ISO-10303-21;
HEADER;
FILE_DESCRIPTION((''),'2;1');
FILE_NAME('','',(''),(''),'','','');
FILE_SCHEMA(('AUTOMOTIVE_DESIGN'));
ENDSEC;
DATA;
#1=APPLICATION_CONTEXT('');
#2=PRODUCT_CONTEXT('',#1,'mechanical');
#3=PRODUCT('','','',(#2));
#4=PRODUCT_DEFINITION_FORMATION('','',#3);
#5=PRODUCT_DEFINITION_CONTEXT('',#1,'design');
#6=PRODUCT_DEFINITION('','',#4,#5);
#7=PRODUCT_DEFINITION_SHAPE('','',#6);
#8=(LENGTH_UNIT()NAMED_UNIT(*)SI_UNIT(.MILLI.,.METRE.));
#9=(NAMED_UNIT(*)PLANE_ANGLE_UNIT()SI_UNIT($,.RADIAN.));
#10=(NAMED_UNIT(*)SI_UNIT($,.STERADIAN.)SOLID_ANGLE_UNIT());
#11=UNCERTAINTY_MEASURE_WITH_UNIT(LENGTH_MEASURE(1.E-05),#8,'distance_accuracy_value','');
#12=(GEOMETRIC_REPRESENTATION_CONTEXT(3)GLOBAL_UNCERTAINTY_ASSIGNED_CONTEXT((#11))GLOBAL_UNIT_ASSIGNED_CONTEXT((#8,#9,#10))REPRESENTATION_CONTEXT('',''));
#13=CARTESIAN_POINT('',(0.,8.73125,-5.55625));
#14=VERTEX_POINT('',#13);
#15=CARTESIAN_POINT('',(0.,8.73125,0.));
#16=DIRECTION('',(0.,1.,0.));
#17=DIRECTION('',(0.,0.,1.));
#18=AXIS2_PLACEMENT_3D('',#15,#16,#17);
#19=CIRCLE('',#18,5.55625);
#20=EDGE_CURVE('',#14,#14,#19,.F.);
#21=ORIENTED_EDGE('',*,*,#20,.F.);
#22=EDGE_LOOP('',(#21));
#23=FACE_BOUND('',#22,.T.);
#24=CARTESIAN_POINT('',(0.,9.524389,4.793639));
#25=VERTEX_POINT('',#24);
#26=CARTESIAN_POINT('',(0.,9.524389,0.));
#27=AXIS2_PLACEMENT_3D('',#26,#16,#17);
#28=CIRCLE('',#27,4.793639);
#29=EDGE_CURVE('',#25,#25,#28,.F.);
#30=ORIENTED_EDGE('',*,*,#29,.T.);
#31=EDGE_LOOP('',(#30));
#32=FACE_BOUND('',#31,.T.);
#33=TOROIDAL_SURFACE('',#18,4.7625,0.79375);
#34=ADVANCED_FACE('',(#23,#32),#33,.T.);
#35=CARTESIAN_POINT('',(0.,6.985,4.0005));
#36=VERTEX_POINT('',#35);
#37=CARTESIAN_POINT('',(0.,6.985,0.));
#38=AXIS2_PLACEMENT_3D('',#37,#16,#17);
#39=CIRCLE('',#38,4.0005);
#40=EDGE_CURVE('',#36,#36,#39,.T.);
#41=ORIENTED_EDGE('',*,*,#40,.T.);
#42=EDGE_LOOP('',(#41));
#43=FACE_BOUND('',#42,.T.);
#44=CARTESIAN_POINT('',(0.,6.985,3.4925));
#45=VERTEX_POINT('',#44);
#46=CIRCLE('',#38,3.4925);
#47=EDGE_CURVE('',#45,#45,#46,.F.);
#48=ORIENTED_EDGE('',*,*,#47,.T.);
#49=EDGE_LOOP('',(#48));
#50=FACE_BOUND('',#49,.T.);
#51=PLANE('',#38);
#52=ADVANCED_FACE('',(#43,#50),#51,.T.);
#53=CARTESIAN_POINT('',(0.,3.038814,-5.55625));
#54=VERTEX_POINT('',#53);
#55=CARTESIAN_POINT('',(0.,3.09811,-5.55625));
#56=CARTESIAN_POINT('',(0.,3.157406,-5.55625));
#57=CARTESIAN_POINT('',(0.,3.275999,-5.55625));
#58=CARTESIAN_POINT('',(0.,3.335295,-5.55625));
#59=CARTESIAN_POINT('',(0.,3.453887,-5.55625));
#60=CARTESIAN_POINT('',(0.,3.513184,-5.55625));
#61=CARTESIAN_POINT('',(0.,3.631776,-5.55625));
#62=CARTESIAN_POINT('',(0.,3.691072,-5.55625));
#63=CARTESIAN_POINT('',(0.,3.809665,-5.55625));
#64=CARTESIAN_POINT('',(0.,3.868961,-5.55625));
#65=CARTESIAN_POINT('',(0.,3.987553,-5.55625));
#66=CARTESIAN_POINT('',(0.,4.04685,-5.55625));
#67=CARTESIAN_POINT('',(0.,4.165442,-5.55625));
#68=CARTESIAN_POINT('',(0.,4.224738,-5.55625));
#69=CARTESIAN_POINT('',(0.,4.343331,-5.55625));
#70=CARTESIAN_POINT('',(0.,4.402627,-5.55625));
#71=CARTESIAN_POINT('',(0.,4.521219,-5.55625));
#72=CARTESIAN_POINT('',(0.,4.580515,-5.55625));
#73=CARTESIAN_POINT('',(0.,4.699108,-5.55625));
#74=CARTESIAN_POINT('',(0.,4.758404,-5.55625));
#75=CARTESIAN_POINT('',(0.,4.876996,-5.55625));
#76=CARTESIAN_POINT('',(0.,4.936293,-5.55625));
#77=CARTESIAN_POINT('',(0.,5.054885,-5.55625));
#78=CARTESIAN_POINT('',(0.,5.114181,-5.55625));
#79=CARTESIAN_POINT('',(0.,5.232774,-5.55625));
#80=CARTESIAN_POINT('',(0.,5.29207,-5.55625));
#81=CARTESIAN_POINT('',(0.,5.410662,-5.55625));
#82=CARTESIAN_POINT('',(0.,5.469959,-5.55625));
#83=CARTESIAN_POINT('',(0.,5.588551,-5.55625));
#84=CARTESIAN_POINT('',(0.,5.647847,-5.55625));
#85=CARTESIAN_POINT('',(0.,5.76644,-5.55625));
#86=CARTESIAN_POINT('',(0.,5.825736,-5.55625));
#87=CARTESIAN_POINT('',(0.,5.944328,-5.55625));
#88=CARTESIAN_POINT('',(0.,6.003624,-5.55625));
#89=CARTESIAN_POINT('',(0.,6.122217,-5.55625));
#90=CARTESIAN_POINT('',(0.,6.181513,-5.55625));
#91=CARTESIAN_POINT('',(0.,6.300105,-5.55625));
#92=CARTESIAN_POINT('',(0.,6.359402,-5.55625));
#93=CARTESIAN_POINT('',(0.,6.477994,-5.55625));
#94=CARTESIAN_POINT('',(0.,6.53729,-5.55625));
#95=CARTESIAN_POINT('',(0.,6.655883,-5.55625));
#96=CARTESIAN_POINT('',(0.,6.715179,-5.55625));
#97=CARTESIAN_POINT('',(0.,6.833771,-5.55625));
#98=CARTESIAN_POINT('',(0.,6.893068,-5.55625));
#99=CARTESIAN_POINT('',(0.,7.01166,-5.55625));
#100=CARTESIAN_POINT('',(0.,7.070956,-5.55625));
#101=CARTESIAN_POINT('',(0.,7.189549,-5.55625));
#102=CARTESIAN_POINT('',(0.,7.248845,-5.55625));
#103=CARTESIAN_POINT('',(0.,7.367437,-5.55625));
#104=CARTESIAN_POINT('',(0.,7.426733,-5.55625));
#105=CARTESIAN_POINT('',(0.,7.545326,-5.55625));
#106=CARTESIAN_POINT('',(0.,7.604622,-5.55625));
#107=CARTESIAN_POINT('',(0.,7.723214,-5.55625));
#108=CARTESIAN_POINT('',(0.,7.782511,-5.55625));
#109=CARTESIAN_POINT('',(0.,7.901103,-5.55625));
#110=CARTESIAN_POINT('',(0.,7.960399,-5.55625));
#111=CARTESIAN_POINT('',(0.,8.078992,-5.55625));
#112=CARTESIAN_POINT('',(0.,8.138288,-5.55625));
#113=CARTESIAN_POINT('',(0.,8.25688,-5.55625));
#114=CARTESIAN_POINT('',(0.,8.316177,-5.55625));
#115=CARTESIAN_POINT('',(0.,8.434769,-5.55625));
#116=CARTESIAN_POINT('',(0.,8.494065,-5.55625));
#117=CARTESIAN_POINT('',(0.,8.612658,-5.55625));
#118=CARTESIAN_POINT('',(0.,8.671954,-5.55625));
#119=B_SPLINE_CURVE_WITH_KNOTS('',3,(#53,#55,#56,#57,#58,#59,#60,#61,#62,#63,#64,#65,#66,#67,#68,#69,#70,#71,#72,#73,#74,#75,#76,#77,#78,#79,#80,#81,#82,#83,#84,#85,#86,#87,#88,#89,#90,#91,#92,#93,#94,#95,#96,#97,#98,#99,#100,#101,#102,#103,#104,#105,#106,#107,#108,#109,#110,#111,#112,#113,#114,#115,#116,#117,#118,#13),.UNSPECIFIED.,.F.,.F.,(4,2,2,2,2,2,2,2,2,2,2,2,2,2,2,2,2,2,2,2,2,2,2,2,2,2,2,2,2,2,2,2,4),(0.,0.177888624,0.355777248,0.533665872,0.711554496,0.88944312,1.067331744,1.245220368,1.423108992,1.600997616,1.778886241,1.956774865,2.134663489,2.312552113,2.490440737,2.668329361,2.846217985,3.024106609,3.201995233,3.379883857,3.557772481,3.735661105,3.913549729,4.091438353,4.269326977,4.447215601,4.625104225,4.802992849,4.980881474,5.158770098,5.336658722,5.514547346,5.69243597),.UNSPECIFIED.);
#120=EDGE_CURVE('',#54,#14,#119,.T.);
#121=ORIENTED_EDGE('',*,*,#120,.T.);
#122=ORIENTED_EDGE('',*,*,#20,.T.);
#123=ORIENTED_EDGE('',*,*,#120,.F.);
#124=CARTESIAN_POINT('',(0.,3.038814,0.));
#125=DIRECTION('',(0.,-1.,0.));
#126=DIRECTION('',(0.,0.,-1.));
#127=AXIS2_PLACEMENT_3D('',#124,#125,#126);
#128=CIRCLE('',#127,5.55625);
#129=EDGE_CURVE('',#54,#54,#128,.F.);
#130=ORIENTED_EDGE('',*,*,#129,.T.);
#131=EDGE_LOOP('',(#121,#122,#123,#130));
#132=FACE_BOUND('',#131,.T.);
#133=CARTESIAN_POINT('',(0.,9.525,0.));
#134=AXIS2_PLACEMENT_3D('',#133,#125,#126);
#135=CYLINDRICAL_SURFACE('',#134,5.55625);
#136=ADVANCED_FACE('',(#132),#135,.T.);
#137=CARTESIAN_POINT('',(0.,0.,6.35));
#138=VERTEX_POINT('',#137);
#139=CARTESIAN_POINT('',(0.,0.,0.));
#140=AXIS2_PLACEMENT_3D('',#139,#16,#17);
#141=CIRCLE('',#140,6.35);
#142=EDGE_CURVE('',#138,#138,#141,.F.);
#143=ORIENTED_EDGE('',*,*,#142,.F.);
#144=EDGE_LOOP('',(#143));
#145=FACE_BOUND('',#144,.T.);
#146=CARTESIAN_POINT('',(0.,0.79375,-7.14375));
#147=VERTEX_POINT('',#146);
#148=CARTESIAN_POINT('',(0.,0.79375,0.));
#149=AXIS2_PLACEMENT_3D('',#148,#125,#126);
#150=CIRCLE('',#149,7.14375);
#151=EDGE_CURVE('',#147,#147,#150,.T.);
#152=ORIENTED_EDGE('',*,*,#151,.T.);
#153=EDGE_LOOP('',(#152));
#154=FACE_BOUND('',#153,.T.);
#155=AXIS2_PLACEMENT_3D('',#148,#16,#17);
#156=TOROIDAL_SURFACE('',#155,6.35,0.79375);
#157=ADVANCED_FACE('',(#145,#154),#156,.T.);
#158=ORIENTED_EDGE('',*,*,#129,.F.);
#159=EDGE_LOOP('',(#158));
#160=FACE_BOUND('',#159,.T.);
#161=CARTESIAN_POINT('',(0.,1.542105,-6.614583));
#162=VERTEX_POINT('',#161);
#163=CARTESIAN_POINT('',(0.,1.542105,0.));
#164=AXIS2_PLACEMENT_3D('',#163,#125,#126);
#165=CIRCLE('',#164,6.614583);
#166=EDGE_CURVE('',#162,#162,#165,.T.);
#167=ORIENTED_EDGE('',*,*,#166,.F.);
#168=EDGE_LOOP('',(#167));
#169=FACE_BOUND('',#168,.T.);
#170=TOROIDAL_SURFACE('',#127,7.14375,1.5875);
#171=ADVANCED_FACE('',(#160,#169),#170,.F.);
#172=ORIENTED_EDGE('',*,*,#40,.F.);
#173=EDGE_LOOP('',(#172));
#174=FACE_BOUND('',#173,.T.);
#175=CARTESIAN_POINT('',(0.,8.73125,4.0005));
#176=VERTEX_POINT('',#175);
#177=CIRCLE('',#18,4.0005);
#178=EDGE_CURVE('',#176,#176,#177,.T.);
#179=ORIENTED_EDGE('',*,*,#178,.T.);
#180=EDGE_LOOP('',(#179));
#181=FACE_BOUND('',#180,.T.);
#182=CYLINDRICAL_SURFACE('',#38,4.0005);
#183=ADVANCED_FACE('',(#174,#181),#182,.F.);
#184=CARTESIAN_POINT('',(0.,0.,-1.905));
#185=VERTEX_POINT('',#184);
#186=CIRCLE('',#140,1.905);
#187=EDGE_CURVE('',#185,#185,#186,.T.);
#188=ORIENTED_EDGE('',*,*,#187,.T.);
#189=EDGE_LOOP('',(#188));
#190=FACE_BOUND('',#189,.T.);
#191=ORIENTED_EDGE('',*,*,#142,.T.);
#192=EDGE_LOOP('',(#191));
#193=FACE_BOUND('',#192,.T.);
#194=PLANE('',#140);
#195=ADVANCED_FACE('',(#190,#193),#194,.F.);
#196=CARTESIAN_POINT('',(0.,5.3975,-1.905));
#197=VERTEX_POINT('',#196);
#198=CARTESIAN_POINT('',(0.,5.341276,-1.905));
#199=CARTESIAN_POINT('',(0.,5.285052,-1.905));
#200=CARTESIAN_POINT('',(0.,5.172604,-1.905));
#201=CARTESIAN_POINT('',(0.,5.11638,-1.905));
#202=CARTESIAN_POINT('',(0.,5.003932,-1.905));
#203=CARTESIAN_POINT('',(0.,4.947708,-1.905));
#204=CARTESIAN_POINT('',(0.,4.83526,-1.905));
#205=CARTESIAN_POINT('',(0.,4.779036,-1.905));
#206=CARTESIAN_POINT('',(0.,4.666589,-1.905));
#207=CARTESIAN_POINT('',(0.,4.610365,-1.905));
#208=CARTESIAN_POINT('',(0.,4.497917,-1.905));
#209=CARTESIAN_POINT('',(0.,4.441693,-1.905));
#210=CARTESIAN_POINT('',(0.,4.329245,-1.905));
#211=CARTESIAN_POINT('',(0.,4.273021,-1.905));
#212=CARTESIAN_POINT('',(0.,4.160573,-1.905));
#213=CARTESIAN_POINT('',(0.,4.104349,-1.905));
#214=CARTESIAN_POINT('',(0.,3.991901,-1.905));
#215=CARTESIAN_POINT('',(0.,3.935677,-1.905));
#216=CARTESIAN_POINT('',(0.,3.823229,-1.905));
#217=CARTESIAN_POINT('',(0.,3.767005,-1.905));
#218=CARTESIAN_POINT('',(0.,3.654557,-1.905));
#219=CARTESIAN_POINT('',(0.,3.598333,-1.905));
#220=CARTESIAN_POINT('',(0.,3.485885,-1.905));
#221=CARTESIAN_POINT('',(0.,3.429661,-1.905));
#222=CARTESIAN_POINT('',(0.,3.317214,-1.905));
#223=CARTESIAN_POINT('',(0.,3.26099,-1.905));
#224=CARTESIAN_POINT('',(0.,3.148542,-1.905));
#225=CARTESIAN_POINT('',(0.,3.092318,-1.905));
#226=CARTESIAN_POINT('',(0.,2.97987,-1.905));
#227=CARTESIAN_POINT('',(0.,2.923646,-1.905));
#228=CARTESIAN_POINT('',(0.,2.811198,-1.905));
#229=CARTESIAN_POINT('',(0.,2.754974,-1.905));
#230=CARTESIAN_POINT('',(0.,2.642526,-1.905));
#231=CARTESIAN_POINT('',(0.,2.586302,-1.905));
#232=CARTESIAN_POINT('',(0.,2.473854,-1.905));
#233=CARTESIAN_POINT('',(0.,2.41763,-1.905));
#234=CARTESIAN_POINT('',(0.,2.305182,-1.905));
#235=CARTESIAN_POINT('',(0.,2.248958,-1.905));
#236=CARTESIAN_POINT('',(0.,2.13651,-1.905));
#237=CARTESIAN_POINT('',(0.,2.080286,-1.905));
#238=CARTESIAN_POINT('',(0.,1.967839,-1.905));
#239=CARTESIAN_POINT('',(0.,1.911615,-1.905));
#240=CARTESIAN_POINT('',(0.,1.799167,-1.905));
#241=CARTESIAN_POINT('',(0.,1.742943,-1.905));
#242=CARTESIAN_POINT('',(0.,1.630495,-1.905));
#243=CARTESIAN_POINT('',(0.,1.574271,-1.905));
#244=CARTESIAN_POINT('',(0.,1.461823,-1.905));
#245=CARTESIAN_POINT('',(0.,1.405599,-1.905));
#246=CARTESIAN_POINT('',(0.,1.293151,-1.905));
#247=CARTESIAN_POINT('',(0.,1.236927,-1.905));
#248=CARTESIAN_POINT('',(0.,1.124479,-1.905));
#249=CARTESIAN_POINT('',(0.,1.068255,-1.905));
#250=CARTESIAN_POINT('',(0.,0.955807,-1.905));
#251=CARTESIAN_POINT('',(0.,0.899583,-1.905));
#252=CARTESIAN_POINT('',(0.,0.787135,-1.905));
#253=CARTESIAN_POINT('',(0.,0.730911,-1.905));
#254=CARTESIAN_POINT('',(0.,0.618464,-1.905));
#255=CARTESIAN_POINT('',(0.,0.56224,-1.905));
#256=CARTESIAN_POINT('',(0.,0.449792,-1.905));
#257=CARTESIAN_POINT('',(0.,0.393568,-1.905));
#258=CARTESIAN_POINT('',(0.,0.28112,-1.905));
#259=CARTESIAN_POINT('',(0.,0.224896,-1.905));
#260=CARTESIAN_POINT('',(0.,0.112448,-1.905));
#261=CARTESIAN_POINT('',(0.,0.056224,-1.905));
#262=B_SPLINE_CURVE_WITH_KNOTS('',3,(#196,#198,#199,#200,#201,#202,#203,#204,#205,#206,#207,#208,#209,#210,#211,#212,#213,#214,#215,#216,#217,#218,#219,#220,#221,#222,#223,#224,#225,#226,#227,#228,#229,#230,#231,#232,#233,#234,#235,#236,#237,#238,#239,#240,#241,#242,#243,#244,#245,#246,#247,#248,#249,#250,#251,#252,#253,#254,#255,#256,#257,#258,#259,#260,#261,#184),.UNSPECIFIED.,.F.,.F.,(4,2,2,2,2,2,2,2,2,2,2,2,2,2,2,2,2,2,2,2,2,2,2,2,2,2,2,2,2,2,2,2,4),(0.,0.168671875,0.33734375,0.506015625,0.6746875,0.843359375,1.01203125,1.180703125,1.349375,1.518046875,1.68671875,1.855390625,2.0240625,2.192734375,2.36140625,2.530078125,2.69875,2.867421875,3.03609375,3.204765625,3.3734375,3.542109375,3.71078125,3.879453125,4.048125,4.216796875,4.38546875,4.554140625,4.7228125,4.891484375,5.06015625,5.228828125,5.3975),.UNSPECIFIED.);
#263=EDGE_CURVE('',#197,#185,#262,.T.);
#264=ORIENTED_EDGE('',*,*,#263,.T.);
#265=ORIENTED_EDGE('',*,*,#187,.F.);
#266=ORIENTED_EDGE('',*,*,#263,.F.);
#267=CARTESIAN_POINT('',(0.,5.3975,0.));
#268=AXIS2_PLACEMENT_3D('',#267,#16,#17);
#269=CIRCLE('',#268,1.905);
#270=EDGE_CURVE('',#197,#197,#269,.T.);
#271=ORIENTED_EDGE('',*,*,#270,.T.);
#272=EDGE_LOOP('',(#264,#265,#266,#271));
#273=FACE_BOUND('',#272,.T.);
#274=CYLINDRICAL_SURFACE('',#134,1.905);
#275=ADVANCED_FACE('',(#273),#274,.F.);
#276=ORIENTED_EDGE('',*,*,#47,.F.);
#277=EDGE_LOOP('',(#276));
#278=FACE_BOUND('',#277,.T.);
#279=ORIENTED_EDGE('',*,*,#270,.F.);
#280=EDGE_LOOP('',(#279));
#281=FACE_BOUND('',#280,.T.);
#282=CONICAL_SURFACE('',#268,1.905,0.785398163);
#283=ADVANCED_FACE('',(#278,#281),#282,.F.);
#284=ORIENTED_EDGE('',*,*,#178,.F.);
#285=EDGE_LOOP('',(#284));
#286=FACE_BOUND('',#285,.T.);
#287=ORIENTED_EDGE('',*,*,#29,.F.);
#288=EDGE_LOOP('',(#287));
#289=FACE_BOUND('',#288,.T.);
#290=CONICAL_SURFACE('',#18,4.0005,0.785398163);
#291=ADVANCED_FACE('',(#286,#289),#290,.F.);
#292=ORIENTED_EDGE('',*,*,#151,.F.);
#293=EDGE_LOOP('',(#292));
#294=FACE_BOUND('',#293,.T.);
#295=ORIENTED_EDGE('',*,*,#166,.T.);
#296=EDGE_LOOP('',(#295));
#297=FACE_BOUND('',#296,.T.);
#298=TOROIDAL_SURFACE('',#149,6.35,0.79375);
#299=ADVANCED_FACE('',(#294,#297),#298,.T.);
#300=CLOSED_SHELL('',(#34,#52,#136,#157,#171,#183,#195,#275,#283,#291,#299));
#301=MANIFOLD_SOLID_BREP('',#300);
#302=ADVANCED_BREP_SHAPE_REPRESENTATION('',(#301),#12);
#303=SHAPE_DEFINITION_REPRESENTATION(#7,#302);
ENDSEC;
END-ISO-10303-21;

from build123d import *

# Parameters (mm, degrees)
SKETCH4_R           = 5.55625
SKETCH4_R_2         = 1.905
BOSS_EXTRUDE3_DEPTH = 9.525
SKETCH5_R           = 7.14375
SKETCH5_R_2         = 1.905
BOSS_EXTRUDE4_DEPTH = 1.5875
FILLET4_R           = 0.79375
FILLET5_R           = 1.5875
SKETCH6_R           = 4.0005
CUT_EXTRUDE1_DEPTH  = 2.54
CHAMFER1_SIZE       = 0.79375
CHAMFER2_SIZE       = 1.5875


with BuildPart() as part:
    # Sketch4 → Boss-Extrude3 (new body)
    with BuildSketch(Plane(origin=(0, 0, 0), x_dir=(1, 0, 0), z_dir=(0, 1, 0))):
        with Locations(Location((0, 0, 0), (0, 0, 90))):
            Circle(SKETCH4_R)
        with Locations(Location((0, 0, 0), (0, 0, 90))):
            Circle(SKETCH4_R_2, mode=Mode.SUBTRACT)
    extrude(amount=BOSS_EXTRUDE3_DEPTH)

    # Sketch5 → Boss-Extrude4 (add)
    with BuildSketch(Plane(origin=(0, 0, 0), x_dir=(-1, 0, 0), z_dir=(0, -1, 0))):
        with Locations(Location((0, 0, 0), (0, 0, 90))):
            Circle(SKETCH5_R)
        with Locations(Location((0, 0, 0), (0, 0, 90))):
            Circle(SKETCH5_R_2, mode=Mode.SUBTRACT)
    extrude(amount=-BOSS_EXTRUDE4_DEPTH)

    # Fillet4
    fillet4_edges = [part.edges().sort_by_distance(p)[0] for p in [
        (0, 0, 7.14375),
        (0, 1.5875, 7.14375),
        (0, 9.525, 5.55625),
    ]]
    fillet(fillet4_edges, radius=FILLET4_R - 0.0001)  # a hair under: the kernel refuses the full size

    # Fillet5
    fillet5_edges = [part.edges().sort_by_distance(p)[0] for p in [
        (0, 1.5875, 5.55625),
    ]]
    fillet(fillet5_edges, radius=FILLET5_R)

    # Sketch6 → Cut-Extrude1 (cut)
    with BuildSketch(Plane(origin=(0, 9.525, 0), x_dir=(1, 0, 0), z_dir=(0, 1, 0))):
        with Locations(Location((0, 0, 0), (0, 0, 270))):
            Circle(SKETCH6_R)
    extrude(amount=-CUT_EXTRUDE1_DEPTH, mode=Mode.SUBTRACT)

    # Chamfer1
    chamfer1_edges = [part.edges().sort_by_distance(p)[0] for p in [
        (0, 9.525, -4.0005),
    ]]
    chamfer(chamfer1_edges, length=CHAMFER1_SIZE)

    # Chamfer2
    chamfer2_edges = [part.edges().sort_by_distance(p)[0] for p in [
        (0, 6.985, 1.905),
    ]]
    chamfer(chamfer2_edges, length=CHAMFER2_SIZE)


solid = part.part
